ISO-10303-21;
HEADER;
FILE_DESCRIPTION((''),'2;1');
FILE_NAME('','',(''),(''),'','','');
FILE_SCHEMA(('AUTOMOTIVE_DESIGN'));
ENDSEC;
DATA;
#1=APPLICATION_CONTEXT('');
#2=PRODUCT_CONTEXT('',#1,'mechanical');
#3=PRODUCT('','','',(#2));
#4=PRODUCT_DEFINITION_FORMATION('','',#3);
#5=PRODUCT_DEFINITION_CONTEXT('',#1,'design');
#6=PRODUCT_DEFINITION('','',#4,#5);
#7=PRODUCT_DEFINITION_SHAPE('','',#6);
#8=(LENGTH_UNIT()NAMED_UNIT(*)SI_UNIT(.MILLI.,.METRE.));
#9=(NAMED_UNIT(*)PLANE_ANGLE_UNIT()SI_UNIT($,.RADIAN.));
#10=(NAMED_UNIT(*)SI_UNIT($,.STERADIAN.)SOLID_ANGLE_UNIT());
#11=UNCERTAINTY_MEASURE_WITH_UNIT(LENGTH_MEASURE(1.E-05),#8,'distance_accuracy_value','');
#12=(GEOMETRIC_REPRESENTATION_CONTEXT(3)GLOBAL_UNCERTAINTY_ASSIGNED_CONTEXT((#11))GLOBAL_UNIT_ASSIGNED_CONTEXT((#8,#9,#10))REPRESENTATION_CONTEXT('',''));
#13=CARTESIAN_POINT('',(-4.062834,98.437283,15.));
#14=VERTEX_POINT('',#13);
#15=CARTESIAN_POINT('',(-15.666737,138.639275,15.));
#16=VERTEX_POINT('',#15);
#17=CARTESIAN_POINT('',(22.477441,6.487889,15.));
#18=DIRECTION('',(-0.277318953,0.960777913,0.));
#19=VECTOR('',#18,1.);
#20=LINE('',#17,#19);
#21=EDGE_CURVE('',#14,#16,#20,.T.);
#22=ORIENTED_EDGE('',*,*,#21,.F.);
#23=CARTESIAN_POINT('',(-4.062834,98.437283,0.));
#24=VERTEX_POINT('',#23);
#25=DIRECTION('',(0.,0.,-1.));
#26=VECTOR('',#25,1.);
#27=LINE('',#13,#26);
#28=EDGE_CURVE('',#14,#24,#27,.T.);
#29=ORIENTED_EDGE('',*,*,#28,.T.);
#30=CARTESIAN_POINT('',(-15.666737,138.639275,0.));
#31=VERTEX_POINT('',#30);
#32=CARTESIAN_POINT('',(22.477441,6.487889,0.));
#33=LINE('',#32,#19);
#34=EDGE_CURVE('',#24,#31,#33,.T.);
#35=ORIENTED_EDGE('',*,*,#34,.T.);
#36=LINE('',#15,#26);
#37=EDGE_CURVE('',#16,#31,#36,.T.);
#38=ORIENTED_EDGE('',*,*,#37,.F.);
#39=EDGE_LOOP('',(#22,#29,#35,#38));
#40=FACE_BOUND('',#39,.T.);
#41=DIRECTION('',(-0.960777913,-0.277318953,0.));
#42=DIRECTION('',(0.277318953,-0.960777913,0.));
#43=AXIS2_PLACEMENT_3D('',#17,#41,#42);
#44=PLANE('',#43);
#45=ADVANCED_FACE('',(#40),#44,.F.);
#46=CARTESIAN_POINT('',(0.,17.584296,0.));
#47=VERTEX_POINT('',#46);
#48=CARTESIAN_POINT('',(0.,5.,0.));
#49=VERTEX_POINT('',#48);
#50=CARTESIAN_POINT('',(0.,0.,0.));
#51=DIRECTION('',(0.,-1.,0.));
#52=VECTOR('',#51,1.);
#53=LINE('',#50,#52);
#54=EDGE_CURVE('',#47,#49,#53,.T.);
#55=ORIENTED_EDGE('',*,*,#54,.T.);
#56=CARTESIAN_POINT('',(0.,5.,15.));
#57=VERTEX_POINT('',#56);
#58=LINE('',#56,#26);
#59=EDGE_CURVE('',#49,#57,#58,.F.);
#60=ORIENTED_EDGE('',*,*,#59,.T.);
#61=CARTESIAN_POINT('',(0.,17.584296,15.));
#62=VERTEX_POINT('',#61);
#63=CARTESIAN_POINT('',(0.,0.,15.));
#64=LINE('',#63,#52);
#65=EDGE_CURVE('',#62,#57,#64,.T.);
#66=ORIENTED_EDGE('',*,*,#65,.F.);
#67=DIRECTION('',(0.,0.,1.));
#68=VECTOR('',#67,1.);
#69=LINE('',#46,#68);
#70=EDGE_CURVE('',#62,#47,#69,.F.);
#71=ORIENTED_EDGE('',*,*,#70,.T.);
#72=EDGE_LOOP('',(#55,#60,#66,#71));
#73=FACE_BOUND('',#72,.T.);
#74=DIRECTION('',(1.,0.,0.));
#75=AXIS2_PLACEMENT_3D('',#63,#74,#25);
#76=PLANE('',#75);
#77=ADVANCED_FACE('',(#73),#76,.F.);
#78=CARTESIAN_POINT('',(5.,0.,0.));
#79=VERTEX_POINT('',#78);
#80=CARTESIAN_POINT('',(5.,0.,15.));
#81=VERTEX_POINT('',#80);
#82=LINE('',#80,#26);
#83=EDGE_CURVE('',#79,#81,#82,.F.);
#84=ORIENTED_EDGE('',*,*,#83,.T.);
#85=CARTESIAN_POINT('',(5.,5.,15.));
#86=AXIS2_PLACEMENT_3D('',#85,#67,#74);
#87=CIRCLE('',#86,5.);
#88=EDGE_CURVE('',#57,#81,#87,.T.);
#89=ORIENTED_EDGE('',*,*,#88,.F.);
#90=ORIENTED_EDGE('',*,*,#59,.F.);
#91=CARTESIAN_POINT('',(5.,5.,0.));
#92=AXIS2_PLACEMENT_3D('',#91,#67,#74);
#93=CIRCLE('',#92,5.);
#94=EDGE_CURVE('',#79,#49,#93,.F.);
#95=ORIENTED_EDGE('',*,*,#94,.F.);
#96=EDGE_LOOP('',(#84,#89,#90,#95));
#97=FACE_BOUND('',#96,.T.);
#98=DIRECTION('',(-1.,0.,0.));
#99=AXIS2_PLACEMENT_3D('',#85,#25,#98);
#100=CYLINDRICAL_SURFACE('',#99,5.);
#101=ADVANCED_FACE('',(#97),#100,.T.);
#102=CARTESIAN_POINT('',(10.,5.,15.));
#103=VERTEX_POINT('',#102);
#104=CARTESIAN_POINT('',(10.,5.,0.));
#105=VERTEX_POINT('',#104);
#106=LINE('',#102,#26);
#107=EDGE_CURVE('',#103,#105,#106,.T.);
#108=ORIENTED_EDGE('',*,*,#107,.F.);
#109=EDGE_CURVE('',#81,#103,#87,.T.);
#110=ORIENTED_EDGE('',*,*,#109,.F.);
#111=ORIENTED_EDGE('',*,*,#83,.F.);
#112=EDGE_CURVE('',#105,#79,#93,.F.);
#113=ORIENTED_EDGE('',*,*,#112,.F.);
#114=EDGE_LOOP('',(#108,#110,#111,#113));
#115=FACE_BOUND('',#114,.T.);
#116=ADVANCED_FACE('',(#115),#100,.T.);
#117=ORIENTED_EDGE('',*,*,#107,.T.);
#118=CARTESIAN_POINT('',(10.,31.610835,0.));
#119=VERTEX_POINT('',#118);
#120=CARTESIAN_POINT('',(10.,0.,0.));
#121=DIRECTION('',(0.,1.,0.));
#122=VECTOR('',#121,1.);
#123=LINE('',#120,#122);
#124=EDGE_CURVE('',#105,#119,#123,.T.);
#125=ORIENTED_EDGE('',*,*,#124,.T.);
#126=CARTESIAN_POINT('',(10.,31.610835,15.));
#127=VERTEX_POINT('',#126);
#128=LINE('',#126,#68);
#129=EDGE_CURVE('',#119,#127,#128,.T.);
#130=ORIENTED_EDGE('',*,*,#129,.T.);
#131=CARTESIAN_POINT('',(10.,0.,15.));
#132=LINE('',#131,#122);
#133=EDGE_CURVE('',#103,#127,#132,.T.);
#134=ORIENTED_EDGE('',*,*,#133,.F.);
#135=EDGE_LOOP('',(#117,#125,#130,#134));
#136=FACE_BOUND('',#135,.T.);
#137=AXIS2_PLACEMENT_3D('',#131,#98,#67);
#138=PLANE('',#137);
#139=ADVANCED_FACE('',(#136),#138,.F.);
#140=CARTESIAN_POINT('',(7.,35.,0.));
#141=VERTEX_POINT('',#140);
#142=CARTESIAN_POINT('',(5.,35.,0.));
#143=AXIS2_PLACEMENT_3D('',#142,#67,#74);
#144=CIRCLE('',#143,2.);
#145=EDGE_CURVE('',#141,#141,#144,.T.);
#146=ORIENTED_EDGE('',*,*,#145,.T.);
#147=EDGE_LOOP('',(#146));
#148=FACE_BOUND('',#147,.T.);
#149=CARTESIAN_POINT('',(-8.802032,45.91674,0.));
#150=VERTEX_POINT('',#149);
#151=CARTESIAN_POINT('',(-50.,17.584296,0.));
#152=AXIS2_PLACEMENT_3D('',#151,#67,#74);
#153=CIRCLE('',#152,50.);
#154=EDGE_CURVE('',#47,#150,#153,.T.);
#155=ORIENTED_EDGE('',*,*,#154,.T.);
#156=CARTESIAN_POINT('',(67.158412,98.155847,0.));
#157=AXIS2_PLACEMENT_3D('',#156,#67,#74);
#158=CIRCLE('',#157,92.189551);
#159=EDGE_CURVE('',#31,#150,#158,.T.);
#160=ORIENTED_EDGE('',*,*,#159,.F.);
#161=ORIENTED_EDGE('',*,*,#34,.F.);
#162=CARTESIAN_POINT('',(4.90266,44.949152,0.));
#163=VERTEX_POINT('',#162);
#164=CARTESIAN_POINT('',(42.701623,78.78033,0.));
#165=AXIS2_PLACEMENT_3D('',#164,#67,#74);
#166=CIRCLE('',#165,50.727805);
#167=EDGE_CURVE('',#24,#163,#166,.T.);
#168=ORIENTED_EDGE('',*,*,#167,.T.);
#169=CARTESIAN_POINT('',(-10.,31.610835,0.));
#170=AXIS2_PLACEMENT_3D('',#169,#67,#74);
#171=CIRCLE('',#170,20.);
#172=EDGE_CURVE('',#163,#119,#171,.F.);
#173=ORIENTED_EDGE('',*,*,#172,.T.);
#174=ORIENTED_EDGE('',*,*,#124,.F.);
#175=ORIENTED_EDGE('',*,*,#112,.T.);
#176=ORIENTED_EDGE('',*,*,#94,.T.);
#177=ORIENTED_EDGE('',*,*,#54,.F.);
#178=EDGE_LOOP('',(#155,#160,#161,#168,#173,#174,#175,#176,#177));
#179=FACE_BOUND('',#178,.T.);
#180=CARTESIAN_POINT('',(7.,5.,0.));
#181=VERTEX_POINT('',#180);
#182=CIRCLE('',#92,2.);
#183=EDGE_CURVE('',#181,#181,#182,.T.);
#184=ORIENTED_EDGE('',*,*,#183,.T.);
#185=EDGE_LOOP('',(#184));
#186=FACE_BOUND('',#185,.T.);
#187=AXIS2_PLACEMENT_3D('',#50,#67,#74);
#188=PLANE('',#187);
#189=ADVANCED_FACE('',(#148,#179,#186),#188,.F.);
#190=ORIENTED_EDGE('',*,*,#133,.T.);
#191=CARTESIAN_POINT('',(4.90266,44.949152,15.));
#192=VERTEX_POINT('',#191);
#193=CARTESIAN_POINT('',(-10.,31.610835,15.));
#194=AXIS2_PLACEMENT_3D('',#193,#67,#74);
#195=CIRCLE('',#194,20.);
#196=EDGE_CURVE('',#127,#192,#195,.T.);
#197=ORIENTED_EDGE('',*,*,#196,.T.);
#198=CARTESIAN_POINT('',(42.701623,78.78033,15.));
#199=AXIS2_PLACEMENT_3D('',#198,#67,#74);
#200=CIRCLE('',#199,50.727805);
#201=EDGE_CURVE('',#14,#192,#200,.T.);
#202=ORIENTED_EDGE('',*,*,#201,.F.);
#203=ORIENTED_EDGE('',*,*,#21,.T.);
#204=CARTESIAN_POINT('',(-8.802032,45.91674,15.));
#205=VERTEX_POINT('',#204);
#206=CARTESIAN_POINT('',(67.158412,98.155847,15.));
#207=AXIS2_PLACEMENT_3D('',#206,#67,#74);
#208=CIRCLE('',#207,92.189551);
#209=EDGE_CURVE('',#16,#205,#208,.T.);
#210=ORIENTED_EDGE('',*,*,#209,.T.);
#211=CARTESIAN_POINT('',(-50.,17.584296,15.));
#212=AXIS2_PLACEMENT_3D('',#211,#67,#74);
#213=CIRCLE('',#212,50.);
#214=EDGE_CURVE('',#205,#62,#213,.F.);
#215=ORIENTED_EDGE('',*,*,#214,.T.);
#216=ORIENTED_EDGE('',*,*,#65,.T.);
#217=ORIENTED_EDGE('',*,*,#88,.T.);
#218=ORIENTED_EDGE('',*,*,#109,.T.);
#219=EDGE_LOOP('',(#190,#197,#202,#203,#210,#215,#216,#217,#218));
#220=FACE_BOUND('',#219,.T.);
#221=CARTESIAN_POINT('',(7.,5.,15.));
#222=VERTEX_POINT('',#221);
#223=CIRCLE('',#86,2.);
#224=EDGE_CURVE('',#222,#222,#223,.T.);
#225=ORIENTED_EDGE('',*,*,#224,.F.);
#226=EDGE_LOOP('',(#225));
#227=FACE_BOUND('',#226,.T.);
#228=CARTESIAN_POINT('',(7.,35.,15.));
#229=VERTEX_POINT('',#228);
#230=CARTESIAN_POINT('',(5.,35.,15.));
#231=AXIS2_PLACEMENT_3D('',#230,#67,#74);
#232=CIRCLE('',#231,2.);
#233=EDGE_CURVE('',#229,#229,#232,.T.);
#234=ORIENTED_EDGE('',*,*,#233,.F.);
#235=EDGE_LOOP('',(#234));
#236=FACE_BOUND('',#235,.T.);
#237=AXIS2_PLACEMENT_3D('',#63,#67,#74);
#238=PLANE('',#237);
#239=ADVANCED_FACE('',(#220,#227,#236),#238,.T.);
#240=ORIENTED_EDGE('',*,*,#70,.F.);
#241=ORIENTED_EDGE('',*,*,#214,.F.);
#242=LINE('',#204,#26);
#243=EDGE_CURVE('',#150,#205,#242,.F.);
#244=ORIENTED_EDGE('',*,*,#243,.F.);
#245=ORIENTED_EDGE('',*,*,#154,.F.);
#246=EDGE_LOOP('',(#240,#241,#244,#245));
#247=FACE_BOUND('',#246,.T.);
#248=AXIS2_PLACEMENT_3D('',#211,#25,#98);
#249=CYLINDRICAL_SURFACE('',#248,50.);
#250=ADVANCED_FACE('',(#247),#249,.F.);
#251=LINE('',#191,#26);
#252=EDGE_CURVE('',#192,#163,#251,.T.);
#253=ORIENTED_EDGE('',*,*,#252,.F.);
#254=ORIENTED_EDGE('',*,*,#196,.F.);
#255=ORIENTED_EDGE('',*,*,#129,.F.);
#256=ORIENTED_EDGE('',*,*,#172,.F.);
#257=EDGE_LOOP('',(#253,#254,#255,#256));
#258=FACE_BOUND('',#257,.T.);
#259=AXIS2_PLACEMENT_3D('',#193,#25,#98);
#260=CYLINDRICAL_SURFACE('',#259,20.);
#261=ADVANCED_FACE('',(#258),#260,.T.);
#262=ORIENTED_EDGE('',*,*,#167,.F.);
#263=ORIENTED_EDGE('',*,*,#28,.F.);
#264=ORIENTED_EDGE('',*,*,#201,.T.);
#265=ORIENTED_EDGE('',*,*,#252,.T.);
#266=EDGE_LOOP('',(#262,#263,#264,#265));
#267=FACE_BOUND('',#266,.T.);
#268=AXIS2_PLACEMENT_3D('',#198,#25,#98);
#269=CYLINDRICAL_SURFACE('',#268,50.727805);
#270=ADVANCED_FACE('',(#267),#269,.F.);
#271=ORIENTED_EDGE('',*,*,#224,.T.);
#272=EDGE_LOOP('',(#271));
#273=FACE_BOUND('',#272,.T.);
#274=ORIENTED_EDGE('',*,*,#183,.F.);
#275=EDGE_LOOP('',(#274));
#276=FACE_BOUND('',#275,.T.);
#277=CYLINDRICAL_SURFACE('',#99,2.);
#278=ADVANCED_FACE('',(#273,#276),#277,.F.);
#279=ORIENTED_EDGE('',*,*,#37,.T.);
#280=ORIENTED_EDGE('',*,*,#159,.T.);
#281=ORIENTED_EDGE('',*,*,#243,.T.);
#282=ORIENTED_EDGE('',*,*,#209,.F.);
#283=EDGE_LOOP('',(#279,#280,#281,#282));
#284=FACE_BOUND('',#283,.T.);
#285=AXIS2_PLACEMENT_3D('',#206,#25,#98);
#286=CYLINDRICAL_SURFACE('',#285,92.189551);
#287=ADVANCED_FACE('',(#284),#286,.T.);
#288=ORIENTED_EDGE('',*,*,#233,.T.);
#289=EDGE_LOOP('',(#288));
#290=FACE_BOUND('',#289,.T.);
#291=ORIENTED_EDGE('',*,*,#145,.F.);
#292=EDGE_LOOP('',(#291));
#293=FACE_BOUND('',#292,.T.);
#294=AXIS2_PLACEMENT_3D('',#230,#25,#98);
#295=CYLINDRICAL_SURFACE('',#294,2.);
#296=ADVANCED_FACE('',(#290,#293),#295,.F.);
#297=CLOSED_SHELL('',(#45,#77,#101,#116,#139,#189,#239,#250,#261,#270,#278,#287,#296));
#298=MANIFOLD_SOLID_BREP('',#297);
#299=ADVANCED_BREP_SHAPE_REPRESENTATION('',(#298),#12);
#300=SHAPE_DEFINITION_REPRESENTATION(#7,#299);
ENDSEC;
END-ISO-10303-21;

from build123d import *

# Parameters (mm, degrees)
BOSS_EXTRUDE1_DEPTH = 15
FILLET1_R           = 20
FILLET2_R           = 5
FILLET3_R           = 50


with BuildPart() as part:
    # Sketch1 → Boss-Extrude1 (new body)
    # profile 1 of 2: a face of its own
    with BuildSketch(Plane.XY):
        with BuildLine():
            Line((0, 0), (5, 0))
            Line((5, 0), (10, 0))
            Line((10, 0), (10, 40))
            ThreePointArc((10, 40), (-6.618184888, 66.911601725), (-4.062833515, 98.437282617))
            Line((-4.062833515, 98.437282617), (-12.996544728, 129.388331338))
            Line((-12.996544728, 129.388331338), (-15.666737168, 138.639274683))
            ThreePointArc((-15.666737168, 138.639274683), (-23.995534595, 84.376466953), (0, 35))
            Line((0, 35), (0, 25))
            Line((0, 25), (0, 0))
        make_face()
        with BuildLine():
            ThreePointArc((7, 5), (6.414213562, 3.585786438), (5, 3))
            ThreePointArc((5, 3), (3, 5), (5, 7))
            ThreePointArc((5, 7), (6.414213562, 6.414213562), (7, 5))
        make_face(mode=Mode.SUBTRACT)
        with BuildLine():
            ThreePointArc((7, 35), (6.414213562, 33.585786438), (5, 33))
            ThreePointArc((5, 33), (3, 35), (5, 37))
            ThreePointArc((5, 37), (6.414213562, 36.414213562), (7, 35))
        make_face(mode=Mode.SUBTRACT)
    # profile 2 of 2: a face of its own
    with BuildSketch(Plane.XY):
        with BuildLine():
            Line((0, 0), (5, 0))
            Line((5, 0), (10, 0))
            Line((10, 0), (10, 40))
            ThreePointArc((10, 40), (-6.618184888, 66.911601725), (-4.062833515, 98.437282617))
            Line((-4.062833515, 98.437282617), (-12.996544728, 129.388331338))
            Line((-12.996544728, 129.388331338), (-15.666737168, 138.639274683))
            ThreePointArc((-15.666737168, 138.639274683), (-23.995534595, 84.376466953), (0, 35))
            Line((0, 35), (0, 25))
            Line((0, 25), (0, 0))
        make_face()
        with BuildLine():
            ThreePointArc((7, 5), (6.414213562, 3.585786438), (5, 3))
            ThreePointArc((5, 3), (3, 5), (5, 7))
            ThreePointArc((5, 7), (6.414213562, 6.414213562), (7, 5))
        make_face(mode=Mode.SUBTRACT)
        with BuildLine():
            ThreePointArc((7, 35), (6.414213562, 33.585786438), (5, 33))
            ThreePointArc((5, 33), (3, 35), (5, 37))
            ThreePointArc((5, 37), (6.414213562, 36.414213562), (7, 35))
        make_face(mode=Mode.SUBTRACT)
    extrude(amount=BOSS_EXTRUDE1_DEPTH)

    # Fillet1
    fillet1_edges = [part.edges().sort_by_distance(p)[0] for p in [
        (10, 40, 7.5),
    ]]
    fillet(fillet1_edges, radius=FILLET1_R)

    # Fillet2
    fillet2_edges = [part.edges().sort_by_distance(p)[0] for p in [
        (0, 0, 7.5),
        (10, 0, 7.5),
    ]]
    fillet(fillet2_edges, radius=FILLET2_R - 0.0001)  # a hair under: the kernel refuses the full size

    # Fillet3
    fillet3_edges = [part.edges().sort_by_distance(p)[0] for p in [
        (0, 35, 7.5),
    ]]
    fillet(fillet3_edges, radius=FILLET3_R)


solid = part.part
